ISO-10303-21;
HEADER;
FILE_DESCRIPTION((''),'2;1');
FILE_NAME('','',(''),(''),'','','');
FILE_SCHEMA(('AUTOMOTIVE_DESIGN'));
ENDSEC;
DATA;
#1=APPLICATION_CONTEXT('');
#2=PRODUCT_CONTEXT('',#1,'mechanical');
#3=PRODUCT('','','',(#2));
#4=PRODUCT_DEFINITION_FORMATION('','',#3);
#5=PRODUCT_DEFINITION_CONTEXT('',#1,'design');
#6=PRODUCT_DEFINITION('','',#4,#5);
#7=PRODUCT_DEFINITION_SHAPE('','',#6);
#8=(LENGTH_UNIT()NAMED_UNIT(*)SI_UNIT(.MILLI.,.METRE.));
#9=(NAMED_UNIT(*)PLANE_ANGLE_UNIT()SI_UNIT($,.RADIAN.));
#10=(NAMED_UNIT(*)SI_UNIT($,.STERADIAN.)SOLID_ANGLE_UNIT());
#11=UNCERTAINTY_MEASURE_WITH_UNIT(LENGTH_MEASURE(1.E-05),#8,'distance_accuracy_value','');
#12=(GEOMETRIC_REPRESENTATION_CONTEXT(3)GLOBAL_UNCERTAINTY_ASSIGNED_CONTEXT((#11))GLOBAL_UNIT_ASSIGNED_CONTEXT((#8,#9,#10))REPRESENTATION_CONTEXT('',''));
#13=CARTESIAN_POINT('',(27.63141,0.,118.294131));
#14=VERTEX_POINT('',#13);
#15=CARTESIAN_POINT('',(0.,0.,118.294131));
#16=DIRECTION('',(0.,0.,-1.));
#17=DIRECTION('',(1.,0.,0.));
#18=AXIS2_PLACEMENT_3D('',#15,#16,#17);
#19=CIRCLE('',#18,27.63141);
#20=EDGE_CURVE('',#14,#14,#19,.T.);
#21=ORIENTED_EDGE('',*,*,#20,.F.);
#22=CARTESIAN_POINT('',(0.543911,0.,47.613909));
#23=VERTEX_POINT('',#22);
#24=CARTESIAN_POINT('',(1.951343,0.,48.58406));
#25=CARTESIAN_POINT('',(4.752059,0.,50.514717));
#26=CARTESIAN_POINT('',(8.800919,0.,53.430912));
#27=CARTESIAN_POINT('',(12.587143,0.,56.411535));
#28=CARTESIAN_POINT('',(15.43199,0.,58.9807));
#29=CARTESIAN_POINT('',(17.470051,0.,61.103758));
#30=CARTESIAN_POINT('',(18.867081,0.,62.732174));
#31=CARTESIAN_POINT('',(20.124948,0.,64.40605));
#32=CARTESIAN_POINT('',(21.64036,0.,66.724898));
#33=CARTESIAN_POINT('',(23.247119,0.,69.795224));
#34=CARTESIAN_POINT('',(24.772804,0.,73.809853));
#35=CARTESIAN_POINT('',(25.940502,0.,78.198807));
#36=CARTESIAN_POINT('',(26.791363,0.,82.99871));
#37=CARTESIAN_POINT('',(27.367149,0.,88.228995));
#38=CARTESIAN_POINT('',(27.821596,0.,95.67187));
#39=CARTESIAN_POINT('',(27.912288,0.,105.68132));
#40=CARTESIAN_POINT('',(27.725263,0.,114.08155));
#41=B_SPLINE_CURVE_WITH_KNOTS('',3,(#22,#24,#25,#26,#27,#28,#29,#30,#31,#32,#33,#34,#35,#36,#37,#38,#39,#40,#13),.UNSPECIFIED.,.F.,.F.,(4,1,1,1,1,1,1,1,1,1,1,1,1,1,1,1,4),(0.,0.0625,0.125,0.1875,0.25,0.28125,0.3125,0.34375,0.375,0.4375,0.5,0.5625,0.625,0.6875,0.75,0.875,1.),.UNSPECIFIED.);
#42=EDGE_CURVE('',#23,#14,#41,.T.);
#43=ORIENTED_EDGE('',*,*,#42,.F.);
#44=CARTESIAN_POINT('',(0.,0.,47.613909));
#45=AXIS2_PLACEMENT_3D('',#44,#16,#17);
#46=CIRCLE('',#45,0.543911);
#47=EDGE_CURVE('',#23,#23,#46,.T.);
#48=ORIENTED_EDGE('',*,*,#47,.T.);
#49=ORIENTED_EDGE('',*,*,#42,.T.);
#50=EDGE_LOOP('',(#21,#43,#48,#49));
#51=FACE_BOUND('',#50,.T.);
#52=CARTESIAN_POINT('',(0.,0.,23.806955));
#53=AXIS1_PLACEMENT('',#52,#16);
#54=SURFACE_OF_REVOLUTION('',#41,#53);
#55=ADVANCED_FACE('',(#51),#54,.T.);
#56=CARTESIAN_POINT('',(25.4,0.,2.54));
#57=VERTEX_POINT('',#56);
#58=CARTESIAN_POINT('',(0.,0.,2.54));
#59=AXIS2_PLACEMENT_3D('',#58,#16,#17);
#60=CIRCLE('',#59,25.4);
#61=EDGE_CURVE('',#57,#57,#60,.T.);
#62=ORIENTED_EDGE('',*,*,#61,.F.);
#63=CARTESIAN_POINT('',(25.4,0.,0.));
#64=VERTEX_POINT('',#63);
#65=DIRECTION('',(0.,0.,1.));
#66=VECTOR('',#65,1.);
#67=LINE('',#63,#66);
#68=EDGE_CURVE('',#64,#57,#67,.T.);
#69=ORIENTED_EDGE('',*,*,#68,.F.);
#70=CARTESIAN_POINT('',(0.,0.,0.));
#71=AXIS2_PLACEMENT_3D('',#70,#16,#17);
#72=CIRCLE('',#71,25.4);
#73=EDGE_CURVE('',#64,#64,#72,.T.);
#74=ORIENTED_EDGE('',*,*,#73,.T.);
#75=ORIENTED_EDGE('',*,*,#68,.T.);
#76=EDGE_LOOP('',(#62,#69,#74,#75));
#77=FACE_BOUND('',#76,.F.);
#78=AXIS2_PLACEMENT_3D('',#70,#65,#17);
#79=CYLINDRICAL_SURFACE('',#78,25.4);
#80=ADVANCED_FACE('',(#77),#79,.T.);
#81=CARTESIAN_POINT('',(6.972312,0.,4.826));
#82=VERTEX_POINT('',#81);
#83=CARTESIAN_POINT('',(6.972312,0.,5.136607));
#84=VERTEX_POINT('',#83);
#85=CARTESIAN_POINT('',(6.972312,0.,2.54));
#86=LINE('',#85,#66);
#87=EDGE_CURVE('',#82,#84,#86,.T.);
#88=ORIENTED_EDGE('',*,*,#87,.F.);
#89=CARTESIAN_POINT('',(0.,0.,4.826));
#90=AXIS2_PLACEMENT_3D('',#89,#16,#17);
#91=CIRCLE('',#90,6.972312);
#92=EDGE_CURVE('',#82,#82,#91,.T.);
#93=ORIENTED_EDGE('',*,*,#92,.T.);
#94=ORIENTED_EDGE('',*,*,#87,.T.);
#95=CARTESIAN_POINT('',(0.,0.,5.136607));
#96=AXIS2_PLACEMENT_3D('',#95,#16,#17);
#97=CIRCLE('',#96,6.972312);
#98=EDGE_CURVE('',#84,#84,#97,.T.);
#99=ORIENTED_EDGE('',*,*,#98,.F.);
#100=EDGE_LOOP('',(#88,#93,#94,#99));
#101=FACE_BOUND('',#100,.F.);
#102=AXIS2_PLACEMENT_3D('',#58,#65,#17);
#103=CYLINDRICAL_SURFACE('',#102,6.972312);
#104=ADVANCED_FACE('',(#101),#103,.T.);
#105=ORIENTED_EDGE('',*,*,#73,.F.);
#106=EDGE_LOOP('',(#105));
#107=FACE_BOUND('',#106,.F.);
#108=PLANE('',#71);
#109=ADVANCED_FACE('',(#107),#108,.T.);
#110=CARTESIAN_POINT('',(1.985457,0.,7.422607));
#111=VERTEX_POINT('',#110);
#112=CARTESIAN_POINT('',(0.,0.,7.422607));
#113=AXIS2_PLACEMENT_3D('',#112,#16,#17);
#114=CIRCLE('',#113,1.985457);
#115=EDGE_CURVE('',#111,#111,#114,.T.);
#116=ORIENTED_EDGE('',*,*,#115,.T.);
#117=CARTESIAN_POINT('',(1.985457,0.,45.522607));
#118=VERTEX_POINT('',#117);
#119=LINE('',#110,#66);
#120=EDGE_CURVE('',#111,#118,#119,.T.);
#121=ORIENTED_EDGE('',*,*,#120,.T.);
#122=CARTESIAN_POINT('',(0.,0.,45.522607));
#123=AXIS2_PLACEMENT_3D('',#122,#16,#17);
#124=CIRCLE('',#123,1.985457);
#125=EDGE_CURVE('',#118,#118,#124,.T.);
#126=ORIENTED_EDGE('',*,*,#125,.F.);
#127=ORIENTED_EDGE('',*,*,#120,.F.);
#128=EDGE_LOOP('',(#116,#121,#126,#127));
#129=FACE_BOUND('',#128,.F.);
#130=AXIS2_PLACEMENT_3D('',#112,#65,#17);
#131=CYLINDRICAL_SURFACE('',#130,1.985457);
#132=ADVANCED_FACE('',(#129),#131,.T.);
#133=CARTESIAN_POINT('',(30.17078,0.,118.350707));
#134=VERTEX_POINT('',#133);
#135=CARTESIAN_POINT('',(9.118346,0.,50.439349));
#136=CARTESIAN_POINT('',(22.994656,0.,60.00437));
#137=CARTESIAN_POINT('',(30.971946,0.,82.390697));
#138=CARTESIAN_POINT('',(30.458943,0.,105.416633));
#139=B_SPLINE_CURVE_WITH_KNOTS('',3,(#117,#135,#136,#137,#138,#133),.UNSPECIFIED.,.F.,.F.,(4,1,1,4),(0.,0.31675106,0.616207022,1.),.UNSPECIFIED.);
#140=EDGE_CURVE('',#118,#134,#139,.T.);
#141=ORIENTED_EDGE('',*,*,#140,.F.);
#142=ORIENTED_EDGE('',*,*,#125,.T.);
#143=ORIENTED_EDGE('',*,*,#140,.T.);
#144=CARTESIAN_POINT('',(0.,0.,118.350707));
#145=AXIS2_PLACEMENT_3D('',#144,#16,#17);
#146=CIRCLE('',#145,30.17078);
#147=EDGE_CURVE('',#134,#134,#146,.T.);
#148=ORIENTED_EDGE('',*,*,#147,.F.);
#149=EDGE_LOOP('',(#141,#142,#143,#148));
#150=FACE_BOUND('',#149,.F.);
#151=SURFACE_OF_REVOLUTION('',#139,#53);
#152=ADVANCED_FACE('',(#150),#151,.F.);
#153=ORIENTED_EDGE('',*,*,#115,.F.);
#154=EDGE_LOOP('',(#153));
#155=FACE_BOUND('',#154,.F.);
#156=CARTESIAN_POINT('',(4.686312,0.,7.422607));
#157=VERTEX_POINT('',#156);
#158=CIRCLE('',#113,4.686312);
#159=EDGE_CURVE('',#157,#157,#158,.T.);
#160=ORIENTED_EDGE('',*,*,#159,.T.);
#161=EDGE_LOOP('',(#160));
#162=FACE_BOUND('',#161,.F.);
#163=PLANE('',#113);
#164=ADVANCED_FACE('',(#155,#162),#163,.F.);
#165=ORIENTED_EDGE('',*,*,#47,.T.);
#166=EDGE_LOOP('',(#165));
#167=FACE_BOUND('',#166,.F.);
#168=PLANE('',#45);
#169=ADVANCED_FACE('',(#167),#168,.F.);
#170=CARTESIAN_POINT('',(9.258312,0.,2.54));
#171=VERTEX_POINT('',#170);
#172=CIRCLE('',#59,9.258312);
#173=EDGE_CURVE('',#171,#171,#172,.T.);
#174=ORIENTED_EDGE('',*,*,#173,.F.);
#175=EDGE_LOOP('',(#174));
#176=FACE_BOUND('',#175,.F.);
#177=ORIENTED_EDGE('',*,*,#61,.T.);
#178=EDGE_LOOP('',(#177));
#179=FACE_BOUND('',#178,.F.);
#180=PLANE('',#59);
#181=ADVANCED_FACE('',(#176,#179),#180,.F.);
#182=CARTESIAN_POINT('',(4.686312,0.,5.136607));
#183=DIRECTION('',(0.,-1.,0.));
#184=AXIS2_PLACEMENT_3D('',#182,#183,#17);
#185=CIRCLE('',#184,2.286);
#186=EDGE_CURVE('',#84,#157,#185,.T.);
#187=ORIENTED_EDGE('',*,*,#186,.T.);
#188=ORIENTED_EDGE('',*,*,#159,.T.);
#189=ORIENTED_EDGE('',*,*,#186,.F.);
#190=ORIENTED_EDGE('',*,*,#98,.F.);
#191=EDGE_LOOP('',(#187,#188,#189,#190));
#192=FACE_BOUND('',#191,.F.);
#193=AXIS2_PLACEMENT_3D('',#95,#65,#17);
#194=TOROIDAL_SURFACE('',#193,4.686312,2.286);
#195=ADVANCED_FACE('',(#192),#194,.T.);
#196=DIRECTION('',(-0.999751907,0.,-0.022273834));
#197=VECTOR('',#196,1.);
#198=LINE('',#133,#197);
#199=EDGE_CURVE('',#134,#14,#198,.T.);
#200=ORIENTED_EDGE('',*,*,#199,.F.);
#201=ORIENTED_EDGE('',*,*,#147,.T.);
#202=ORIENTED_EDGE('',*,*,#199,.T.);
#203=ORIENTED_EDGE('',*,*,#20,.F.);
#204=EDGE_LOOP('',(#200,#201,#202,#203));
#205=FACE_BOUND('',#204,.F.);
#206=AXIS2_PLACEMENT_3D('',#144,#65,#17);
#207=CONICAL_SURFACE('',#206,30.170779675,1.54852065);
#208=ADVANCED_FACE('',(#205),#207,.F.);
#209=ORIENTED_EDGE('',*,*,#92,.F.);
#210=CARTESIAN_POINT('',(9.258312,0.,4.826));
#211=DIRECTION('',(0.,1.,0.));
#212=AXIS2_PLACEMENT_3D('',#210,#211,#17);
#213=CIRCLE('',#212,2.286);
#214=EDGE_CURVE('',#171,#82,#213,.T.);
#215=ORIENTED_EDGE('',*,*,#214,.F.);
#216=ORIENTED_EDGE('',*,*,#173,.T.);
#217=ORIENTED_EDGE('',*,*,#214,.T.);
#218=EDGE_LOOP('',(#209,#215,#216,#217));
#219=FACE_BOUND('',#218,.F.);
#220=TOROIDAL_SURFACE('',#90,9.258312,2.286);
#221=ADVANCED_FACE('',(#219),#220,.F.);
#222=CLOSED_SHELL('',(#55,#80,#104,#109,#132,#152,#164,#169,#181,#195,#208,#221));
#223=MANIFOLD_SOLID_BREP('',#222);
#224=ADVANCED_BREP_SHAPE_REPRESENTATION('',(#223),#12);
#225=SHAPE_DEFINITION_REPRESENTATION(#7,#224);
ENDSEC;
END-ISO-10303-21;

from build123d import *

# Parameters (mm, degrees)
F2_R = 2.286


# Not quite as in the source:
# - the dataset's text gives a spline's control points without its knots; the knots are read off the source's solid


with BuildPart() as f1:
    # F0 (on Front) → F1 (revolve)
    with BuildSketch(Plane.XZ):
        with BuildLine():
            Line((0, 47.6139092823), (0, 0))
            Line((0, 0), (25.4, 0))
            Line((25.4, 0), (25.4, 2.54))
            Line((25.4, 2.54), (6.9723119959, 2.54))
            Line((6.9723119959, 2.54), (6.9723119959, 7.4226073921))
            Line((6.9723119959, 7.4226073921), (1.9854572602, 7.4226073921))
            Line((1.9854572602, 7.4226073921), (1.9854572602, 45.5226073921))
            add(Edge.make_bspline(
                [(1.9854572602, 45.5226073921), (9.1183458915, 50.4393489291), (22.9946563844, 60.0043702981), (30.9719457485, 82.3906969255), (30.4589425939, 105.4166327755), (30.1707796752, 118.3507069945)],
                knots=[0, 0, 0, 0, 0.3167510601, 0.6162070217, 1, 1, 1, 1], degree=3))
            Line((30.1707796752, 118.3507069945), (27.6314098305, 118.2941314551))
            add(Edge.make_bspline(
                [(0.5439107281, 47.6139092823), (1.9513426061, 48.5840602454), (4.7520594595, 50.514716622), (8.8009190581, 53.4309124613), (12.587142562, 56.4115346213), (15.431990129, 58.9806996874), (17.4700514796, 61.1037584309), (18.8670813382, 62.7321741187), (20.1249479639, 64.4060497761), (21.6403604896, 66.724897673), (23.2471186454, 69.7952235715), (24.7728044852, 73.8098530535), (25.9405021256, 78.1988066628), (26.7913628714, 82.9987097248), (27.3671494468, 88.2289946642), (27.8215961355, 95.6718703705), (27.9122878106, 105.6813195614), (27.7252634622, 114.0815497541), (27.6314098305, 118.2941314551)],
                knots=[-3e-10, -3e-10, -3e-10, -3e-10, 0.0624999997, 0.1249999998, 0.1874999998, 0.2499999998, 0.2812499998, 0.3124999998, 0.3437499998, 0.3749999998, 0.4374999998, 0.4999999999, 0.5624999999, 0.6249999999, 0.6874999999, 0.7499999999, 0.875, 1, 1, 1, 1], degree=3))
            Line((0.5439107281, 47.6139092823), (0, 47.6139092823))
        make_face()
    revolve(axis=Axis((0, 0, 23.8069546411), (0, 0, -1)))

    # F2
    f2_edges = [f1.edges().sort_by_distance(p)[0] for p in [
        (-6.972312, 0, 7.422607),
        (-6.972312, 0, 2.54),
    ]]
    fillet(f2_edges, radius=F2_R)


solid = f1.part
